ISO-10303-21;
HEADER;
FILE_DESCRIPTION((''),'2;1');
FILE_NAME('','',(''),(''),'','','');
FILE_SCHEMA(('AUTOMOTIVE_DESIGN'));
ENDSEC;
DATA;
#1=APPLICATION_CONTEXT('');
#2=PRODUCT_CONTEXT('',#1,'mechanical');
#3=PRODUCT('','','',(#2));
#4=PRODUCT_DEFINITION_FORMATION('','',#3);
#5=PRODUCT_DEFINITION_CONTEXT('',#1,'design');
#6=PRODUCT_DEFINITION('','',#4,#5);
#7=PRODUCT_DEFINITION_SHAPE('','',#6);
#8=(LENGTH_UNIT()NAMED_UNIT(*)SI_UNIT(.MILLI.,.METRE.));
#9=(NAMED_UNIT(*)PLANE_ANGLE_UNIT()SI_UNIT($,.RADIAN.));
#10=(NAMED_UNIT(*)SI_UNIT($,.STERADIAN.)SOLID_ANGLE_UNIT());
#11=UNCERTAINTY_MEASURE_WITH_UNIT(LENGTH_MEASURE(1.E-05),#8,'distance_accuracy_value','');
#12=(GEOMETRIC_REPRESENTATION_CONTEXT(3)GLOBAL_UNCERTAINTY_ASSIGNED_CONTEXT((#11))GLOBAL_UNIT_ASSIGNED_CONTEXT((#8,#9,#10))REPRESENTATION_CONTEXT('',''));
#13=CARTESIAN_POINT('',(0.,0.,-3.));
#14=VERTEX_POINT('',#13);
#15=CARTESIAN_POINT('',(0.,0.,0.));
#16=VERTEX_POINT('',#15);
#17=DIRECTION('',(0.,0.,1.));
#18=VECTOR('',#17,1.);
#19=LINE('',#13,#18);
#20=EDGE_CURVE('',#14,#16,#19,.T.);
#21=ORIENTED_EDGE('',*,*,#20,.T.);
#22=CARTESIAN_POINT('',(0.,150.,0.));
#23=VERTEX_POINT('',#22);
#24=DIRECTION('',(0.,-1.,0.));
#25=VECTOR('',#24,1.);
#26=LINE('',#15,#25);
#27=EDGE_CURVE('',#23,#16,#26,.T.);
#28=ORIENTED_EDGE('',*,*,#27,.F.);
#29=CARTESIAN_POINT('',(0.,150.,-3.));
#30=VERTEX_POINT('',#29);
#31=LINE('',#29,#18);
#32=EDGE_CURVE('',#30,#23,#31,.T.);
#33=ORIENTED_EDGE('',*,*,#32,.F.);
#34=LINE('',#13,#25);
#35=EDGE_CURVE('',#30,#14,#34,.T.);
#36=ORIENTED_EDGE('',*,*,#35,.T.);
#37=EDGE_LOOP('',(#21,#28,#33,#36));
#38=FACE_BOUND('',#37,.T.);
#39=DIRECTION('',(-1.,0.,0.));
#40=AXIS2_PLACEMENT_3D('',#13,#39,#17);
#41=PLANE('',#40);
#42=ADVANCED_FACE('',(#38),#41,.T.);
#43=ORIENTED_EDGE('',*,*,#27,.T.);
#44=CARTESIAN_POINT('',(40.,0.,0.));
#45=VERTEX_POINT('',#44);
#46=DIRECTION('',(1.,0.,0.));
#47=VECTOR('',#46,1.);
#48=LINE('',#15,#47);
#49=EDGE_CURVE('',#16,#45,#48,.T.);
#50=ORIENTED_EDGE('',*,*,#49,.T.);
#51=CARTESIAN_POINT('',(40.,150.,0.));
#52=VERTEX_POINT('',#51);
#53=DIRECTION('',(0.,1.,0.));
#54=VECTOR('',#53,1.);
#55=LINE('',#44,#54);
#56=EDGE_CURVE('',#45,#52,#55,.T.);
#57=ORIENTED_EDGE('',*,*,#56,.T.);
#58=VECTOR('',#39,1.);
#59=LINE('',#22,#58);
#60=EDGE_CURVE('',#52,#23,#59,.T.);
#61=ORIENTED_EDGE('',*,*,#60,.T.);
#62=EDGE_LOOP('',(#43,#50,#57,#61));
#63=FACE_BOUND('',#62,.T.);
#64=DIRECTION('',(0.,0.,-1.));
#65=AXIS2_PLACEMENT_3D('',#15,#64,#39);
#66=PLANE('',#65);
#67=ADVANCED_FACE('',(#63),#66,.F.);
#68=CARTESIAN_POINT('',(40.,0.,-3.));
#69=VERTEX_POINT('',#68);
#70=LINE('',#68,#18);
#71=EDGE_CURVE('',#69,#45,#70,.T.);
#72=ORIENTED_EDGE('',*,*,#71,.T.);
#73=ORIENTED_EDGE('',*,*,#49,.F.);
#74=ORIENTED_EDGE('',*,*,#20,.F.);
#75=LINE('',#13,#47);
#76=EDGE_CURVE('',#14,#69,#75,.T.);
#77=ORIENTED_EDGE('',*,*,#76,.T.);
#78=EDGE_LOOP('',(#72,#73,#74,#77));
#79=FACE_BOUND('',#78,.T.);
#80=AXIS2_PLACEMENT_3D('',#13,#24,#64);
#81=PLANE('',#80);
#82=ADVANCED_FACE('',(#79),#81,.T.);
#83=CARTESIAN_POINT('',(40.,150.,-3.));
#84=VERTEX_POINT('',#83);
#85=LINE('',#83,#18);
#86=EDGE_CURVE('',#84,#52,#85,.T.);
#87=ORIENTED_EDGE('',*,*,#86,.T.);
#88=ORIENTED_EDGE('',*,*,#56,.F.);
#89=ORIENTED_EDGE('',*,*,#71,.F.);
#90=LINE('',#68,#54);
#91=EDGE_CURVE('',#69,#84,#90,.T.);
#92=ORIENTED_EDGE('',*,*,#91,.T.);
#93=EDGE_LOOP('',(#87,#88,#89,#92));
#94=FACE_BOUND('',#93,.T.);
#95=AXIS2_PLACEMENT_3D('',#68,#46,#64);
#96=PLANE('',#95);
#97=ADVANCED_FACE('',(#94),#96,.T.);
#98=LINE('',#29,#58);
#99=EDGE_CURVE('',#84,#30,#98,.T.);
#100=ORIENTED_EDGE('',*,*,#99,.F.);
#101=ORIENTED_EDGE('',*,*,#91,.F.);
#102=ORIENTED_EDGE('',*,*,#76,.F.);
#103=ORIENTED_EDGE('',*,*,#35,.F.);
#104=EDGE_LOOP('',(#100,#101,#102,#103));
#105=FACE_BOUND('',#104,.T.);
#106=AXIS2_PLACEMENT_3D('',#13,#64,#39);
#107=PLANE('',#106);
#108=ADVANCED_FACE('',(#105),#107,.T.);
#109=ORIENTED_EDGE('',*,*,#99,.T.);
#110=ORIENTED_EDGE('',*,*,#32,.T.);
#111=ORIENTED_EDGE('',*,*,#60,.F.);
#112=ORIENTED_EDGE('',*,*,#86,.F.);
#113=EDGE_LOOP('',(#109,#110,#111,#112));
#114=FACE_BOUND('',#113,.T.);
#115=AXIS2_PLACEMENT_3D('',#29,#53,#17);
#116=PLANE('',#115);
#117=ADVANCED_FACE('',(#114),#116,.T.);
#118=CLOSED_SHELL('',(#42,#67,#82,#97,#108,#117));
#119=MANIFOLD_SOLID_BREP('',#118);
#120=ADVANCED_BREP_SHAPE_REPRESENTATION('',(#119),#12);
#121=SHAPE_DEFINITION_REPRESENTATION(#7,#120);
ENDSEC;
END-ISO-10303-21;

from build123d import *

# Parameters (mm, degrees)
SKETCH1_W          = 40
SKETCH1_H          = 150
BASE_FLANGE1_DEPTH = 3


# Sheet-metal steps are written as plain solids
with BuildPart() as part:
    # Sketch1 → Base-Flange1 (new body)
    with BuildSketch(Plane.XY):
        with Locations((20, 75)):
            Rectangle(SKETCH1_W, SKETCH1_H)
    extrude(amount=-BASE_FLANGE1_DEPTH)


solid = part.part
